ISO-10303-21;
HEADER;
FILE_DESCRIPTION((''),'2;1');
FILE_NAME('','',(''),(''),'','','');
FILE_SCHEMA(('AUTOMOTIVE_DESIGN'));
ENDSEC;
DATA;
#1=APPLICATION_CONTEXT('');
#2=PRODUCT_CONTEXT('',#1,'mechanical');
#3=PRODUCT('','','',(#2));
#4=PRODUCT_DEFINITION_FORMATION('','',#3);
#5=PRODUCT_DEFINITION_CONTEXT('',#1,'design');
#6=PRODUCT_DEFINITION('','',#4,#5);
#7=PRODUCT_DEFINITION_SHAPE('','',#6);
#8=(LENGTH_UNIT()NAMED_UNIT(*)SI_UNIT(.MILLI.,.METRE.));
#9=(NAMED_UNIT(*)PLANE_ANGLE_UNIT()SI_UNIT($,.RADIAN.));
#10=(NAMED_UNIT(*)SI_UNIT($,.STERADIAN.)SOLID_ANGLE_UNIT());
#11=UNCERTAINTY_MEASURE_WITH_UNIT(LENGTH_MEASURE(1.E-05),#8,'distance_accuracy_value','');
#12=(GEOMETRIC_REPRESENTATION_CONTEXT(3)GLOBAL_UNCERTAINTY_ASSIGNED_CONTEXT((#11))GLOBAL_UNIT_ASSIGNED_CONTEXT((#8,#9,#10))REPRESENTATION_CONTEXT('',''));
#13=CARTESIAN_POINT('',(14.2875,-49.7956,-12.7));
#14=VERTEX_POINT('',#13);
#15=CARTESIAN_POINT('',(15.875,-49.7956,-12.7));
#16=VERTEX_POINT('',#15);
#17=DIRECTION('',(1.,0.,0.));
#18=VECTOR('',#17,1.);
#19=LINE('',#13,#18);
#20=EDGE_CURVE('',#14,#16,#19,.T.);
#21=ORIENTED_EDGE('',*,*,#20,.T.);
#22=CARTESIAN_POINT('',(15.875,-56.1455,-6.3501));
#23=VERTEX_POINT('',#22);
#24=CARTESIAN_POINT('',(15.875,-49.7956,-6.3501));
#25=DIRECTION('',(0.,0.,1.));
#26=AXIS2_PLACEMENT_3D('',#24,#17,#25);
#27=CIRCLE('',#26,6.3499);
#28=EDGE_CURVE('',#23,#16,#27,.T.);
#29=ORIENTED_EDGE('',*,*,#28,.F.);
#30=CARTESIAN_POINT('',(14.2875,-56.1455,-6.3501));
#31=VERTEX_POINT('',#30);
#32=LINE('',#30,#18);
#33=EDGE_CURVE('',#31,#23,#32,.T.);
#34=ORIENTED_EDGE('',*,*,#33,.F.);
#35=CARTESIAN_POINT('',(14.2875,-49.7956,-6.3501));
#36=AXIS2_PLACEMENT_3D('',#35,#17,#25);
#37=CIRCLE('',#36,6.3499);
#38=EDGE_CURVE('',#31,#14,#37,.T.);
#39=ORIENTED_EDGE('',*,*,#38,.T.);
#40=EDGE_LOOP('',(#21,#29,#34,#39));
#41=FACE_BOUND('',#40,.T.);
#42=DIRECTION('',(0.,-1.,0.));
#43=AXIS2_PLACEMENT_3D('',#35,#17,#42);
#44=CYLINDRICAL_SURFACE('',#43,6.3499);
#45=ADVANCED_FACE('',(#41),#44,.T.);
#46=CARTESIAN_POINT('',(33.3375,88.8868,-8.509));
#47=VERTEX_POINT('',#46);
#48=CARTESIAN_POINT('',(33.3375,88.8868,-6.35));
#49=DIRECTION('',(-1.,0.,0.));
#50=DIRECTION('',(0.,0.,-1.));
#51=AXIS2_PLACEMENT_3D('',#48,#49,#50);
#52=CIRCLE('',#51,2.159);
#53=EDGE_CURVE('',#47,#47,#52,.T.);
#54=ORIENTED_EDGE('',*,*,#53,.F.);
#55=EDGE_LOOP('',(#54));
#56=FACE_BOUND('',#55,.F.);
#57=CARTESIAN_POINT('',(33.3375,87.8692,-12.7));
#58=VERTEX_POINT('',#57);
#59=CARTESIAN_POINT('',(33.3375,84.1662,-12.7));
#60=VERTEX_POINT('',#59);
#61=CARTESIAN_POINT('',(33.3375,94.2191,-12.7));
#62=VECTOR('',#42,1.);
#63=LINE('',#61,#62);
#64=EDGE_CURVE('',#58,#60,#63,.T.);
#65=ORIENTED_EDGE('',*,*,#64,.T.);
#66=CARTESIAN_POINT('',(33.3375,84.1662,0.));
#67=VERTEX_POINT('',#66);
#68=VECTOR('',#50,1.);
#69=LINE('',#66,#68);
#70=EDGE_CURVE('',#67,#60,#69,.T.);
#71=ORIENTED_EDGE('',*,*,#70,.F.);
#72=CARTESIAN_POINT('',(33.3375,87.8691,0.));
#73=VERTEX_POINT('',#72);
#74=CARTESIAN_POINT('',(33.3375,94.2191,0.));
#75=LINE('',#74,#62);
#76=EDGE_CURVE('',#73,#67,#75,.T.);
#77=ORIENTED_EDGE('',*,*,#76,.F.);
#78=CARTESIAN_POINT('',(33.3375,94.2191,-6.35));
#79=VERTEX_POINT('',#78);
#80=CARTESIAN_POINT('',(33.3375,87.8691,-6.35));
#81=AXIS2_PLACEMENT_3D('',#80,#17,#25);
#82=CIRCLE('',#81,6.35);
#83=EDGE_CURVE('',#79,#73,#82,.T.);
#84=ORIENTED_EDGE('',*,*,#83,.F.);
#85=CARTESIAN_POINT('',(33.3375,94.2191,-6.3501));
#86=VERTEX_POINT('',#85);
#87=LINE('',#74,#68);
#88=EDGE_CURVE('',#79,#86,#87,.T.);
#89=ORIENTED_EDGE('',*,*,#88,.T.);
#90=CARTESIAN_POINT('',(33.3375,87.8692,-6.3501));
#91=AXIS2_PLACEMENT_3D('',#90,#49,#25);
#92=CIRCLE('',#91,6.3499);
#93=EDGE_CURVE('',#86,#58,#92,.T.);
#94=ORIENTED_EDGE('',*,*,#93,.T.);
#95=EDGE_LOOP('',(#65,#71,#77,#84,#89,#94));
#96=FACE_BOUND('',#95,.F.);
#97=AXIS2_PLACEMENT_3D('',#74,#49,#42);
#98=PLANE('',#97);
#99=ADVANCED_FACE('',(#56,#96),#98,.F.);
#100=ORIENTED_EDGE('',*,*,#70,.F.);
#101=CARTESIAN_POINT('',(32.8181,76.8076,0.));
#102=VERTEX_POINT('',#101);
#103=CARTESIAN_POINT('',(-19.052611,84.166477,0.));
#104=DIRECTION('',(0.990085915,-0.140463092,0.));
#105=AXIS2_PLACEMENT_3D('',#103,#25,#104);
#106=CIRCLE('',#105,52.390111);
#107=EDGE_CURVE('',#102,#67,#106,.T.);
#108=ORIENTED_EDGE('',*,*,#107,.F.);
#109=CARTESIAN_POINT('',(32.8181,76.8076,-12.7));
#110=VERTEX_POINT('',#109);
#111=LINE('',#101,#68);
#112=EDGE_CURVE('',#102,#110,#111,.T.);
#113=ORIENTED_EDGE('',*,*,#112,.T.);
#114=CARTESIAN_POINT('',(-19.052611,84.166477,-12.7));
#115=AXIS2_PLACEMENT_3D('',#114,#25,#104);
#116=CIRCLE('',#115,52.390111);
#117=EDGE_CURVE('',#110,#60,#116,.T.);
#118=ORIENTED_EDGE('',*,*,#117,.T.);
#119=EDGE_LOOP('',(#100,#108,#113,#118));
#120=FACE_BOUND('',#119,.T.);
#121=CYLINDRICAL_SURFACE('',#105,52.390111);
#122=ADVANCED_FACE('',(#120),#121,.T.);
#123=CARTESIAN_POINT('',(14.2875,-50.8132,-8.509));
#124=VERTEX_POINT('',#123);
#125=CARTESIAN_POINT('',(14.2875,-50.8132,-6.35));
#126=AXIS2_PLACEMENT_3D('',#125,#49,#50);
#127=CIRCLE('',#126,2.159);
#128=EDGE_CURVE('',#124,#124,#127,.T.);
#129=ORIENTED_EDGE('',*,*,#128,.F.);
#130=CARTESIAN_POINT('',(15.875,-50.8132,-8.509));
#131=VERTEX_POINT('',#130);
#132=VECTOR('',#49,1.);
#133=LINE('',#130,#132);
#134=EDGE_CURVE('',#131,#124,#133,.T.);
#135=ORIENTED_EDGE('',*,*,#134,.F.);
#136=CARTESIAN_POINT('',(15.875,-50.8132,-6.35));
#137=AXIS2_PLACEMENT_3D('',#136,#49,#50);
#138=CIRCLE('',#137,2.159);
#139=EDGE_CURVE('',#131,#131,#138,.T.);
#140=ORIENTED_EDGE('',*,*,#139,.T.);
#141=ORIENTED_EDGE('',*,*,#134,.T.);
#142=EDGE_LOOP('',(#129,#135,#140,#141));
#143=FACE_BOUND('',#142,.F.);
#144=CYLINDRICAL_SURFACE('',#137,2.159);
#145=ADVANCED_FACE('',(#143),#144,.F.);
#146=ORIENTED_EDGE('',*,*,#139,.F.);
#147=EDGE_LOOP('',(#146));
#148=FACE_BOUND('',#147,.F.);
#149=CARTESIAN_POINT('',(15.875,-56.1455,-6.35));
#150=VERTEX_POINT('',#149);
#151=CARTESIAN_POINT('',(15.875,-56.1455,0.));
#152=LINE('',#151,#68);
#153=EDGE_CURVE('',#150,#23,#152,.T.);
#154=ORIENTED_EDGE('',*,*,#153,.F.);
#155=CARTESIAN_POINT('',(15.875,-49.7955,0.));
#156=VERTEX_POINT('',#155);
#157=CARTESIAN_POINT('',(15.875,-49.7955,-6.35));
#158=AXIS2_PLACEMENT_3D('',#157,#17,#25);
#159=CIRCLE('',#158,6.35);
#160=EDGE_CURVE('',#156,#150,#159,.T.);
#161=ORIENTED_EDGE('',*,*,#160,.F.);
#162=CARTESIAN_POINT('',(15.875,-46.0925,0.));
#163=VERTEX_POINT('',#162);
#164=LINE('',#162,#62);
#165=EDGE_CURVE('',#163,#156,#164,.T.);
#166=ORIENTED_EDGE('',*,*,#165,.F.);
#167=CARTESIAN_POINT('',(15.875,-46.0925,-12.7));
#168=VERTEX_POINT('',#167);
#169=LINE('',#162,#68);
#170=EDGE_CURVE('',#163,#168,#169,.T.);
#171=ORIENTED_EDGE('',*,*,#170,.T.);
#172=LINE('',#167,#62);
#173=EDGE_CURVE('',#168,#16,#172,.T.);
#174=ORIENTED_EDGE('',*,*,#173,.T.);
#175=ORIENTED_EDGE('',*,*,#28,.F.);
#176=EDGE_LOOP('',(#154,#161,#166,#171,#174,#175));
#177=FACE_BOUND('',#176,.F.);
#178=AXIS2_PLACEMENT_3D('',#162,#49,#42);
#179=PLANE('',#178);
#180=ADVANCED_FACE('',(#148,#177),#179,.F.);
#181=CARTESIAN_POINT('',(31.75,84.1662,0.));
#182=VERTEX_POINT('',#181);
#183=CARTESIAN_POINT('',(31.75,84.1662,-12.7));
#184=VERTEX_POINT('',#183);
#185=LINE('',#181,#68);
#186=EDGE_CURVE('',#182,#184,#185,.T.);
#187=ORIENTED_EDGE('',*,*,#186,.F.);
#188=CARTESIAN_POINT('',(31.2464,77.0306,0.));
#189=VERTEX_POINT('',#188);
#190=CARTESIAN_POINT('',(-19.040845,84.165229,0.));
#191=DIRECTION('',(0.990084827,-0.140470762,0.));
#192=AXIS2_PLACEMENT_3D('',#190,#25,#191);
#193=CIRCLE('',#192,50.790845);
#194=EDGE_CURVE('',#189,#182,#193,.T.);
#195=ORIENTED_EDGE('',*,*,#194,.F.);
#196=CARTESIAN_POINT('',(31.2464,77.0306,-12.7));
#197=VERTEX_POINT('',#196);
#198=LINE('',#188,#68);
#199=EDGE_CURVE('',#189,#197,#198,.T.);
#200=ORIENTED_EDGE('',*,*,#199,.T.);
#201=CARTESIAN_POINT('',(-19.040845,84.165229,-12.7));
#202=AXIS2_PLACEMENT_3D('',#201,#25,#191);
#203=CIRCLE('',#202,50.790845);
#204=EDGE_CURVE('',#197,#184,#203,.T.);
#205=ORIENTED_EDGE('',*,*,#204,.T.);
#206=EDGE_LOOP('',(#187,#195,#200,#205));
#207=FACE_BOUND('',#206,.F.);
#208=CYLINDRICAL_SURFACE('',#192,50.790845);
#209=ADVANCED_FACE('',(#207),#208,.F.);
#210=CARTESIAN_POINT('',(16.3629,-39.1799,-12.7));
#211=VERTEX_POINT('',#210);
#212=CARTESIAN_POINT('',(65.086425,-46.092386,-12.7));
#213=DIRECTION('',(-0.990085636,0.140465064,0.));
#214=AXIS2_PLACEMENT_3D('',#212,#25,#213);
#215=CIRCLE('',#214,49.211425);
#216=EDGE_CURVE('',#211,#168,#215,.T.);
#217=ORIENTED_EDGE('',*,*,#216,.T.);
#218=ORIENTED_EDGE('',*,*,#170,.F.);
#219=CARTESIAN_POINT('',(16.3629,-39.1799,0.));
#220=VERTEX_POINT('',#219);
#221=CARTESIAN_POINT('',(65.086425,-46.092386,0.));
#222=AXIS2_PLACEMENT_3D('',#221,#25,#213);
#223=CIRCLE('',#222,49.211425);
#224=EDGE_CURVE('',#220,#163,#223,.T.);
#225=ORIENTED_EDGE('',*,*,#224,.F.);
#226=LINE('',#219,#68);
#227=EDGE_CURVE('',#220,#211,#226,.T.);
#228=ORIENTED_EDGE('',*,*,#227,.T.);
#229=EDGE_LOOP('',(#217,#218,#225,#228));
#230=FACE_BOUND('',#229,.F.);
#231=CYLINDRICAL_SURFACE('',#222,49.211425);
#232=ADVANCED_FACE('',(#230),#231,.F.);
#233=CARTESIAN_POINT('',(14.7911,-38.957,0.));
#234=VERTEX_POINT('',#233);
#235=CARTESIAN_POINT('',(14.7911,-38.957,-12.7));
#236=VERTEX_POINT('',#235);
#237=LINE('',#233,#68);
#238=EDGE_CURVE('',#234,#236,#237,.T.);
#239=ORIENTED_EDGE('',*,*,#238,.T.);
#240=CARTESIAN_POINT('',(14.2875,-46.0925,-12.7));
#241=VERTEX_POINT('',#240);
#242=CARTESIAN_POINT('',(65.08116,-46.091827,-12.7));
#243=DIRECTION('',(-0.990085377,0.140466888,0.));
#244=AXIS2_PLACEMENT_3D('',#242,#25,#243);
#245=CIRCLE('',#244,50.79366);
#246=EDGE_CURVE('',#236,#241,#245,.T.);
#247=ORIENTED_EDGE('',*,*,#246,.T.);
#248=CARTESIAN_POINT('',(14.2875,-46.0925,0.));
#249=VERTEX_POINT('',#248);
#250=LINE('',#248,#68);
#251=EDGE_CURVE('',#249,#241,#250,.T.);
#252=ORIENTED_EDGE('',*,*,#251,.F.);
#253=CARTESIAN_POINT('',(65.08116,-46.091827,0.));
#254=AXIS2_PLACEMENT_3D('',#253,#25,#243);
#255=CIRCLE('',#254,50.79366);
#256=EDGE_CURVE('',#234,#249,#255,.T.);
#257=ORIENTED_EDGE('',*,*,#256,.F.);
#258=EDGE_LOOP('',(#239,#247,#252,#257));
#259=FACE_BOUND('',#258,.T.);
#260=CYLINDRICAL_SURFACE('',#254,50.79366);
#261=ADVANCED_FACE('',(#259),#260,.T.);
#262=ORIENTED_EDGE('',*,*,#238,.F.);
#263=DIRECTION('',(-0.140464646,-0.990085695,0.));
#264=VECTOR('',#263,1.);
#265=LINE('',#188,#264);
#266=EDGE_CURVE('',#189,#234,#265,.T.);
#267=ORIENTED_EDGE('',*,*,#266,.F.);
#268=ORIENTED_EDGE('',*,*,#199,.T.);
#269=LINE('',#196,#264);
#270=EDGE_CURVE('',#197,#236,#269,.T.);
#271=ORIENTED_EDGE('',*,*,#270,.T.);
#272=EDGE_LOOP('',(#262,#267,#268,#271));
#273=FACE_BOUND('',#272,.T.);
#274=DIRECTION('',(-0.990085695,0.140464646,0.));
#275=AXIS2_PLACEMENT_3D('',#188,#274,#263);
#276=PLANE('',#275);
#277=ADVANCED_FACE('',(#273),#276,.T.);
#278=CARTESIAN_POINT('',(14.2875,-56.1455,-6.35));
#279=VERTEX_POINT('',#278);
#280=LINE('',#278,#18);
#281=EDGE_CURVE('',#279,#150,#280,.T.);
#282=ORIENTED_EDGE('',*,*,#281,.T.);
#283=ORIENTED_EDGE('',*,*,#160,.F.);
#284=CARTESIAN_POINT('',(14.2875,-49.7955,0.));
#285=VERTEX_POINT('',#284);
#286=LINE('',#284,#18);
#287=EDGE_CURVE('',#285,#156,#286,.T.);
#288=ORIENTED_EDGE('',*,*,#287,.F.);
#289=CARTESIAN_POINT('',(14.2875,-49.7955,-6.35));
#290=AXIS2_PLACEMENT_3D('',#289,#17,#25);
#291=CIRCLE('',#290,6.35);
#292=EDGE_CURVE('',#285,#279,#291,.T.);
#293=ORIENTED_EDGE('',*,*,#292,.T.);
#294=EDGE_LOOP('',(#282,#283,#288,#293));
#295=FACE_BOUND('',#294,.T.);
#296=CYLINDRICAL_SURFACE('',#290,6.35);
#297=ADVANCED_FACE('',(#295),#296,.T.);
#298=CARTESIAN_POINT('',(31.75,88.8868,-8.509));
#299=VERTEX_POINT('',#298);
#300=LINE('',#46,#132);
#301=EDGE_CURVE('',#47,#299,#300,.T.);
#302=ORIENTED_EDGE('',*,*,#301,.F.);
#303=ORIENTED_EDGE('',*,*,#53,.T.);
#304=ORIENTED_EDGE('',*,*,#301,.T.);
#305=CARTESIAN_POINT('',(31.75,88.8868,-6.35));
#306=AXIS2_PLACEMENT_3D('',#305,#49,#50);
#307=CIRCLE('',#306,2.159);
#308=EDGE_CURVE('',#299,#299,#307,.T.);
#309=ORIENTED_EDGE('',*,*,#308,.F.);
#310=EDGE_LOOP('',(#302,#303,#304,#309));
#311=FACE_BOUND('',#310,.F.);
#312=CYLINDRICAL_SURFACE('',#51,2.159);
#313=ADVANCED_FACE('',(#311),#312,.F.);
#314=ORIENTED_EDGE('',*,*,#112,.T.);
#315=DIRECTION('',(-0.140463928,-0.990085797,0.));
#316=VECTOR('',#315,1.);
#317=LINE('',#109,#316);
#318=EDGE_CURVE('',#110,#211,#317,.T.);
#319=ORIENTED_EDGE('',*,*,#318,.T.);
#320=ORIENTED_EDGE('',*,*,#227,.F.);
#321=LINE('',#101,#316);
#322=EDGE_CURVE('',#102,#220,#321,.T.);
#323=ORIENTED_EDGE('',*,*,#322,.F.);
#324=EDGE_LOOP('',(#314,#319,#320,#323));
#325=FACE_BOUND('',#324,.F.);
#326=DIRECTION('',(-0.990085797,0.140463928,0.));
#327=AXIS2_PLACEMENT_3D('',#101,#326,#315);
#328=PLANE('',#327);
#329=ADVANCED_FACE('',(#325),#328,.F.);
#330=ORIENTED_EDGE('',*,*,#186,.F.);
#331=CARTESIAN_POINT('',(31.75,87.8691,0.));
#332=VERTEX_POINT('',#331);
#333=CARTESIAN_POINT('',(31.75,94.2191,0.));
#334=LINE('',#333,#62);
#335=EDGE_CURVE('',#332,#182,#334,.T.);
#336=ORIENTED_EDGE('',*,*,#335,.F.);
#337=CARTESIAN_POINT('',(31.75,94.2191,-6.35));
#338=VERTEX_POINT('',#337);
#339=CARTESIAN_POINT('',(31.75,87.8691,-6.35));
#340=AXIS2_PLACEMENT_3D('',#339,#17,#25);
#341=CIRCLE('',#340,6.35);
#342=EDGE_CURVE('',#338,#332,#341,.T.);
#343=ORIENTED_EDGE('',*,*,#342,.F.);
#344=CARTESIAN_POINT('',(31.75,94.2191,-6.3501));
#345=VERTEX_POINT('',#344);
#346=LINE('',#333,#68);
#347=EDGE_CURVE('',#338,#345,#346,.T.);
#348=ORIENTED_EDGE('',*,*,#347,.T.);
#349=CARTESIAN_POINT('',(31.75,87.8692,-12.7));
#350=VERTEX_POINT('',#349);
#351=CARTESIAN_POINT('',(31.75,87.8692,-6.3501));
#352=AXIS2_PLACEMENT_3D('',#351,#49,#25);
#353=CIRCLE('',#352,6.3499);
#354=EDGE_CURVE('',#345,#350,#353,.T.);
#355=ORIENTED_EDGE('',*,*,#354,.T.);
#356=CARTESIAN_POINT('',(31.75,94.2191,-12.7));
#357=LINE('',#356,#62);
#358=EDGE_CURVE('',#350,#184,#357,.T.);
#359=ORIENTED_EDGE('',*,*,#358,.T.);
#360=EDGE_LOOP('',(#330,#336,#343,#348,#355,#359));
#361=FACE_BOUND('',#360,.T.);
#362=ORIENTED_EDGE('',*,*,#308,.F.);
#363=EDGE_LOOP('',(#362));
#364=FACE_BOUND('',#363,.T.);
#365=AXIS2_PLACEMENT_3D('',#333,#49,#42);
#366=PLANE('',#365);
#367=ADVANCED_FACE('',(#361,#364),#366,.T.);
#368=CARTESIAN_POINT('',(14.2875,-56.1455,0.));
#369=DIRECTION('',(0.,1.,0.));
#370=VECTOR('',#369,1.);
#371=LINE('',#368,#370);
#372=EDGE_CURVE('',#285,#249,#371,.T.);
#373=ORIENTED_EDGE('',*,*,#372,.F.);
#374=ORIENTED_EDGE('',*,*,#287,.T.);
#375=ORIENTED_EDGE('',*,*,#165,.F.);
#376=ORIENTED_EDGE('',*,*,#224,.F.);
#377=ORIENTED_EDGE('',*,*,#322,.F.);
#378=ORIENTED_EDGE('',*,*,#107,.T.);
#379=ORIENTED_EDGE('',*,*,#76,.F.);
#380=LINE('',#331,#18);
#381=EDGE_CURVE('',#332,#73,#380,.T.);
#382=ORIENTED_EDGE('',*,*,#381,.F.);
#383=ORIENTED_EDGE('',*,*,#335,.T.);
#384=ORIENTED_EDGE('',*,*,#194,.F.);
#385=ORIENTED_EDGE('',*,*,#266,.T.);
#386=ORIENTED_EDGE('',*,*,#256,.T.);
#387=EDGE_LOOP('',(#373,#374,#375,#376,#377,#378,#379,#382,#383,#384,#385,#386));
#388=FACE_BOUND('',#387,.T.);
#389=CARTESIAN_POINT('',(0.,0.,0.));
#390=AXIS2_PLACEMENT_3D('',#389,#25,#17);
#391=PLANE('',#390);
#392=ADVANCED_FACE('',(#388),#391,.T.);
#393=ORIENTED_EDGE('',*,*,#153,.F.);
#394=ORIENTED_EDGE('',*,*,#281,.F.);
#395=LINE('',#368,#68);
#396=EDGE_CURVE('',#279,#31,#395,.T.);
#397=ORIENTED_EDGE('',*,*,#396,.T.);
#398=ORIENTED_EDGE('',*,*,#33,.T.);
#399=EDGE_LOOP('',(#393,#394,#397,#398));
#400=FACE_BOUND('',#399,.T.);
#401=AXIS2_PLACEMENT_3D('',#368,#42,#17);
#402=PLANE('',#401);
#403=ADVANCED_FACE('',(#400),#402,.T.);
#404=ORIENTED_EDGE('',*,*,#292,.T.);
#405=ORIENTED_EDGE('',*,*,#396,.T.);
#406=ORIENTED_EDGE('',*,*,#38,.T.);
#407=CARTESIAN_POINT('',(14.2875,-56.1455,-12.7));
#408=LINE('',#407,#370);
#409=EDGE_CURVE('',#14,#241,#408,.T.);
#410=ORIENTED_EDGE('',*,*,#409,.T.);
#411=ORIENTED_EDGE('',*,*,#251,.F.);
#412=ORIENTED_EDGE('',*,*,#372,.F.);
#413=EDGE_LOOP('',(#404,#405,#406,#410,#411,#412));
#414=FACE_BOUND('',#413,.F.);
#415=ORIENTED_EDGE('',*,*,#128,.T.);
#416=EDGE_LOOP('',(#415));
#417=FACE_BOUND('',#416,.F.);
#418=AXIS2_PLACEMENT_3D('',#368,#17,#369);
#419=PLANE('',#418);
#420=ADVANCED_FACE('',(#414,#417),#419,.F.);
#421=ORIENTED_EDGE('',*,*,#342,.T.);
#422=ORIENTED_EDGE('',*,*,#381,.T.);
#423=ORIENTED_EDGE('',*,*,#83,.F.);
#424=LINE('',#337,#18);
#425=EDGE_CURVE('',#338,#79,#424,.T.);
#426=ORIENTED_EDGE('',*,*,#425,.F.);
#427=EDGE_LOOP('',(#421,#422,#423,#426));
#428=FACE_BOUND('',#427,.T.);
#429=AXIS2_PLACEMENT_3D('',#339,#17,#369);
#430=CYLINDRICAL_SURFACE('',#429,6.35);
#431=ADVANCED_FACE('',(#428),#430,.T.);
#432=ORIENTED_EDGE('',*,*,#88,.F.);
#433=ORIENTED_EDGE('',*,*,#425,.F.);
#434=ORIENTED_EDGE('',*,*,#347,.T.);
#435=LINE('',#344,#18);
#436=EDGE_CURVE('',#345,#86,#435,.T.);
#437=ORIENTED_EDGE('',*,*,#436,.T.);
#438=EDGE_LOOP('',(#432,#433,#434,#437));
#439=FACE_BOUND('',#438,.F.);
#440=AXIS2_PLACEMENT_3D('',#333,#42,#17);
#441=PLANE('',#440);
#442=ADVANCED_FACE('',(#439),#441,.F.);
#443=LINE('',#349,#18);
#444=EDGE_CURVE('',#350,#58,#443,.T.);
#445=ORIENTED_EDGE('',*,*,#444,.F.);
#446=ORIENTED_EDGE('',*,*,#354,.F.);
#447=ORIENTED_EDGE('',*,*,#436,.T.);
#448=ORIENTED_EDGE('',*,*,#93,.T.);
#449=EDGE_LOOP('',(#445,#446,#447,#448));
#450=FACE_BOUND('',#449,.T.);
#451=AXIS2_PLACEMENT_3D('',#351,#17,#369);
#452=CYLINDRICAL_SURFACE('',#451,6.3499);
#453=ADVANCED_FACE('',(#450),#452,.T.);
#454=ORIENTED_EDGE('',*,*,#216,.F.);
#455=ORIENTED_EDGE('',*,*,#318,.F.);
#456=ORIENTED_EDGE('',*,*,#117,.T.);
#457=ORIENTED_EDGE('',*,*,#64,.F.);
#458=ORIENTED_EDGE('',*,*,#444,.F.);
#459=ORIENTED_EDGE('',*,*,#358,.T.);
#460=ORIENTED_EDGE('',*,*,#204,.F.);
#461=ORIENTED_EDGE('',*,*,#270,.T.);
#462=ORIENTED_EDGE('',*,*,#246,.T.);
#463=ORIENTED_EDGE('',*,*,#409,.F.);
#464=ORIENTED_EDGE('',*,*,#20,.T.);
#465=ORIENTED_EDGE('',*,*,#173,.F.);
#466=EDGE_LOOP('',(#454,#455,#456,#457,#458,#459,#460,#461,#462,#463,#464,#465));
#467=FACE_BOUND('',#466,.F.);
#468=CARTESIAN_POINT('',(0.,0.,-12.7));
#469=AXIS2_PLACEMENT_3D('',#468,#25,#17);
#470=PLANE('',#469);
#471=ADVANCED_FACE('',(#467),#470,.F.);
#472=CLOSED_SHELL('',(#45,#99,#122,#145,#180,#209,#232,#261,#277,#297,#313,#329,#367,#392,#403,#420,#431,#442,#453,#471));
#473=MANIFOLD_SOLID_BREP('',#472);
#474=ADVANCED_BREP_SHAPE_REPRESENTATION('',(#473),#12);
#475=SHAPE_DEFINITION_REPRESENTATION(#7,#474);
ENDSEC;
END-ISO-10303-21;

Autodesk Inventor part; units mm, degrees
ref_plane "YZ Plane" through (0, 0, 0) normal (1, 0, 0) x (0, 1, 0)
ref_plane "XZ Plane" through (0, 0, 0) normal (0, 1, 0) x (-1, 0, 0)
ref_plane "XY Plane" through (0, 0, 0) normal (0, 0, 1) x (1, 0, 0)
sketch "Sketch1" plane through (0, 0, 0) normal (0, 0, 1) x (1, 0, 0)
  line L0 (31.75, 85.8647) -> (31.75, 91.9353) construction
  line L1 (14.2875, -48.6156) -> (14.2875, -52.9844) construction
  line L2 (31.75, 94.2191) -> (31.75, 84.1662)
  line L3 (14.2875, -56.1455) -> (14.2875, -46.0925)
  line L4 (31.2464, 77.0306) -> (14.7911, -38.957)
  arc A0 (31.2464, 77.0306) -> (31.75, 84.1662) centre (-19.05, 84.1662) ccw
  arc A1 (14.7911, -38.957) -> (14.2875, -46.0925) centre (65.0875, -46.0925) ccw
  line L5 (33.3375, 94.2191) -> (33.3375, 84.1662)
  arc A2 (32.8181, 76.8076) -> (33.3375, 84.1662) centre (-19.05, 84.1662) ccw
  line L6 (32.8181, 76.8076) -> (16.3629, -39.1799)
  arc A3 (16.3629, -39.1799) -> (15.875, -46.0925) centre (65.0875, -46.0925) ccw
  line L7 (15.875, -46.0925) -> (15.875, -56.1455)
  line L8 (31.75, 94.2191) -> (33.3375, 94.2191)
  line L9 (14.2875, -56.1455) -> (15.875, -56.1455)
  line L10 (43.5527, 91.6185) -> (43.5527, 89.0199)
  point P0 (0, 0)
  dimension "d0" = 50.8
  dimension "d1" = 50.8
  dimension "d2" = 1.5875
  dimension "d26" = 2.5986
  dimension "d27" = 130.2587
  dimension "d28" = 10.053
extrude "Extrusion1" add sketch "Sketch1" against normal blind 12.7
fillet "Fillet1" radius 6.35 1 edges at (32.5437, 94.2191, 0)
fillet "Fillet2" radius 6.35 1 edges at (32.5437, 94.2191, -12.7)
fillet "Fillet3" radius 6.35 1 edges at (15.0812, -56.1455, 0)
fillet "Fillet4" radius 6.35 1 edges at (15.0812, -56.1455, -12.7)
sketch "Sketch2" plane through (33.3375, 84.1662, 0) normal (1, 0, 0) x (0, 0, -1)
  line L0 (12.7, 10.053) -> (12.7, 0) construction
  line L1 (0, 0) -> (0, 10.053) construction
  line L2 (0, 0) -> (12.7, 0) construction
  circle A0 centre (6.35, 4.7207) radius 6.35
  point P0 (0, -84.1662)
hole "Hole1" at (33.3375, 88.8868, -6.35) direction (-1, 0, 0) diameter 4.318 end through all
sketch "Sketch3" plane through (15.875, -56.1455, 0) normal (1, 0, 0) x (0, 0, -1)
  line L0 (12.7, 10.053) -> (12.7, 0) construction
  line L1 (0, 0) -> (0, 10.053) construction
  circle A0 centre (6.35, 5.3323) radius 6.35
  line L2 (0, 10.053) -> (12.7, 10.053) construction
  point P0 (0, 56.1455)
hole "Hole2" at (15.875, -50.8132, -6.35) direction (-1, 0, 0) diameter 4.318 end through all
properties part number "Endgame ramp polycarb"
